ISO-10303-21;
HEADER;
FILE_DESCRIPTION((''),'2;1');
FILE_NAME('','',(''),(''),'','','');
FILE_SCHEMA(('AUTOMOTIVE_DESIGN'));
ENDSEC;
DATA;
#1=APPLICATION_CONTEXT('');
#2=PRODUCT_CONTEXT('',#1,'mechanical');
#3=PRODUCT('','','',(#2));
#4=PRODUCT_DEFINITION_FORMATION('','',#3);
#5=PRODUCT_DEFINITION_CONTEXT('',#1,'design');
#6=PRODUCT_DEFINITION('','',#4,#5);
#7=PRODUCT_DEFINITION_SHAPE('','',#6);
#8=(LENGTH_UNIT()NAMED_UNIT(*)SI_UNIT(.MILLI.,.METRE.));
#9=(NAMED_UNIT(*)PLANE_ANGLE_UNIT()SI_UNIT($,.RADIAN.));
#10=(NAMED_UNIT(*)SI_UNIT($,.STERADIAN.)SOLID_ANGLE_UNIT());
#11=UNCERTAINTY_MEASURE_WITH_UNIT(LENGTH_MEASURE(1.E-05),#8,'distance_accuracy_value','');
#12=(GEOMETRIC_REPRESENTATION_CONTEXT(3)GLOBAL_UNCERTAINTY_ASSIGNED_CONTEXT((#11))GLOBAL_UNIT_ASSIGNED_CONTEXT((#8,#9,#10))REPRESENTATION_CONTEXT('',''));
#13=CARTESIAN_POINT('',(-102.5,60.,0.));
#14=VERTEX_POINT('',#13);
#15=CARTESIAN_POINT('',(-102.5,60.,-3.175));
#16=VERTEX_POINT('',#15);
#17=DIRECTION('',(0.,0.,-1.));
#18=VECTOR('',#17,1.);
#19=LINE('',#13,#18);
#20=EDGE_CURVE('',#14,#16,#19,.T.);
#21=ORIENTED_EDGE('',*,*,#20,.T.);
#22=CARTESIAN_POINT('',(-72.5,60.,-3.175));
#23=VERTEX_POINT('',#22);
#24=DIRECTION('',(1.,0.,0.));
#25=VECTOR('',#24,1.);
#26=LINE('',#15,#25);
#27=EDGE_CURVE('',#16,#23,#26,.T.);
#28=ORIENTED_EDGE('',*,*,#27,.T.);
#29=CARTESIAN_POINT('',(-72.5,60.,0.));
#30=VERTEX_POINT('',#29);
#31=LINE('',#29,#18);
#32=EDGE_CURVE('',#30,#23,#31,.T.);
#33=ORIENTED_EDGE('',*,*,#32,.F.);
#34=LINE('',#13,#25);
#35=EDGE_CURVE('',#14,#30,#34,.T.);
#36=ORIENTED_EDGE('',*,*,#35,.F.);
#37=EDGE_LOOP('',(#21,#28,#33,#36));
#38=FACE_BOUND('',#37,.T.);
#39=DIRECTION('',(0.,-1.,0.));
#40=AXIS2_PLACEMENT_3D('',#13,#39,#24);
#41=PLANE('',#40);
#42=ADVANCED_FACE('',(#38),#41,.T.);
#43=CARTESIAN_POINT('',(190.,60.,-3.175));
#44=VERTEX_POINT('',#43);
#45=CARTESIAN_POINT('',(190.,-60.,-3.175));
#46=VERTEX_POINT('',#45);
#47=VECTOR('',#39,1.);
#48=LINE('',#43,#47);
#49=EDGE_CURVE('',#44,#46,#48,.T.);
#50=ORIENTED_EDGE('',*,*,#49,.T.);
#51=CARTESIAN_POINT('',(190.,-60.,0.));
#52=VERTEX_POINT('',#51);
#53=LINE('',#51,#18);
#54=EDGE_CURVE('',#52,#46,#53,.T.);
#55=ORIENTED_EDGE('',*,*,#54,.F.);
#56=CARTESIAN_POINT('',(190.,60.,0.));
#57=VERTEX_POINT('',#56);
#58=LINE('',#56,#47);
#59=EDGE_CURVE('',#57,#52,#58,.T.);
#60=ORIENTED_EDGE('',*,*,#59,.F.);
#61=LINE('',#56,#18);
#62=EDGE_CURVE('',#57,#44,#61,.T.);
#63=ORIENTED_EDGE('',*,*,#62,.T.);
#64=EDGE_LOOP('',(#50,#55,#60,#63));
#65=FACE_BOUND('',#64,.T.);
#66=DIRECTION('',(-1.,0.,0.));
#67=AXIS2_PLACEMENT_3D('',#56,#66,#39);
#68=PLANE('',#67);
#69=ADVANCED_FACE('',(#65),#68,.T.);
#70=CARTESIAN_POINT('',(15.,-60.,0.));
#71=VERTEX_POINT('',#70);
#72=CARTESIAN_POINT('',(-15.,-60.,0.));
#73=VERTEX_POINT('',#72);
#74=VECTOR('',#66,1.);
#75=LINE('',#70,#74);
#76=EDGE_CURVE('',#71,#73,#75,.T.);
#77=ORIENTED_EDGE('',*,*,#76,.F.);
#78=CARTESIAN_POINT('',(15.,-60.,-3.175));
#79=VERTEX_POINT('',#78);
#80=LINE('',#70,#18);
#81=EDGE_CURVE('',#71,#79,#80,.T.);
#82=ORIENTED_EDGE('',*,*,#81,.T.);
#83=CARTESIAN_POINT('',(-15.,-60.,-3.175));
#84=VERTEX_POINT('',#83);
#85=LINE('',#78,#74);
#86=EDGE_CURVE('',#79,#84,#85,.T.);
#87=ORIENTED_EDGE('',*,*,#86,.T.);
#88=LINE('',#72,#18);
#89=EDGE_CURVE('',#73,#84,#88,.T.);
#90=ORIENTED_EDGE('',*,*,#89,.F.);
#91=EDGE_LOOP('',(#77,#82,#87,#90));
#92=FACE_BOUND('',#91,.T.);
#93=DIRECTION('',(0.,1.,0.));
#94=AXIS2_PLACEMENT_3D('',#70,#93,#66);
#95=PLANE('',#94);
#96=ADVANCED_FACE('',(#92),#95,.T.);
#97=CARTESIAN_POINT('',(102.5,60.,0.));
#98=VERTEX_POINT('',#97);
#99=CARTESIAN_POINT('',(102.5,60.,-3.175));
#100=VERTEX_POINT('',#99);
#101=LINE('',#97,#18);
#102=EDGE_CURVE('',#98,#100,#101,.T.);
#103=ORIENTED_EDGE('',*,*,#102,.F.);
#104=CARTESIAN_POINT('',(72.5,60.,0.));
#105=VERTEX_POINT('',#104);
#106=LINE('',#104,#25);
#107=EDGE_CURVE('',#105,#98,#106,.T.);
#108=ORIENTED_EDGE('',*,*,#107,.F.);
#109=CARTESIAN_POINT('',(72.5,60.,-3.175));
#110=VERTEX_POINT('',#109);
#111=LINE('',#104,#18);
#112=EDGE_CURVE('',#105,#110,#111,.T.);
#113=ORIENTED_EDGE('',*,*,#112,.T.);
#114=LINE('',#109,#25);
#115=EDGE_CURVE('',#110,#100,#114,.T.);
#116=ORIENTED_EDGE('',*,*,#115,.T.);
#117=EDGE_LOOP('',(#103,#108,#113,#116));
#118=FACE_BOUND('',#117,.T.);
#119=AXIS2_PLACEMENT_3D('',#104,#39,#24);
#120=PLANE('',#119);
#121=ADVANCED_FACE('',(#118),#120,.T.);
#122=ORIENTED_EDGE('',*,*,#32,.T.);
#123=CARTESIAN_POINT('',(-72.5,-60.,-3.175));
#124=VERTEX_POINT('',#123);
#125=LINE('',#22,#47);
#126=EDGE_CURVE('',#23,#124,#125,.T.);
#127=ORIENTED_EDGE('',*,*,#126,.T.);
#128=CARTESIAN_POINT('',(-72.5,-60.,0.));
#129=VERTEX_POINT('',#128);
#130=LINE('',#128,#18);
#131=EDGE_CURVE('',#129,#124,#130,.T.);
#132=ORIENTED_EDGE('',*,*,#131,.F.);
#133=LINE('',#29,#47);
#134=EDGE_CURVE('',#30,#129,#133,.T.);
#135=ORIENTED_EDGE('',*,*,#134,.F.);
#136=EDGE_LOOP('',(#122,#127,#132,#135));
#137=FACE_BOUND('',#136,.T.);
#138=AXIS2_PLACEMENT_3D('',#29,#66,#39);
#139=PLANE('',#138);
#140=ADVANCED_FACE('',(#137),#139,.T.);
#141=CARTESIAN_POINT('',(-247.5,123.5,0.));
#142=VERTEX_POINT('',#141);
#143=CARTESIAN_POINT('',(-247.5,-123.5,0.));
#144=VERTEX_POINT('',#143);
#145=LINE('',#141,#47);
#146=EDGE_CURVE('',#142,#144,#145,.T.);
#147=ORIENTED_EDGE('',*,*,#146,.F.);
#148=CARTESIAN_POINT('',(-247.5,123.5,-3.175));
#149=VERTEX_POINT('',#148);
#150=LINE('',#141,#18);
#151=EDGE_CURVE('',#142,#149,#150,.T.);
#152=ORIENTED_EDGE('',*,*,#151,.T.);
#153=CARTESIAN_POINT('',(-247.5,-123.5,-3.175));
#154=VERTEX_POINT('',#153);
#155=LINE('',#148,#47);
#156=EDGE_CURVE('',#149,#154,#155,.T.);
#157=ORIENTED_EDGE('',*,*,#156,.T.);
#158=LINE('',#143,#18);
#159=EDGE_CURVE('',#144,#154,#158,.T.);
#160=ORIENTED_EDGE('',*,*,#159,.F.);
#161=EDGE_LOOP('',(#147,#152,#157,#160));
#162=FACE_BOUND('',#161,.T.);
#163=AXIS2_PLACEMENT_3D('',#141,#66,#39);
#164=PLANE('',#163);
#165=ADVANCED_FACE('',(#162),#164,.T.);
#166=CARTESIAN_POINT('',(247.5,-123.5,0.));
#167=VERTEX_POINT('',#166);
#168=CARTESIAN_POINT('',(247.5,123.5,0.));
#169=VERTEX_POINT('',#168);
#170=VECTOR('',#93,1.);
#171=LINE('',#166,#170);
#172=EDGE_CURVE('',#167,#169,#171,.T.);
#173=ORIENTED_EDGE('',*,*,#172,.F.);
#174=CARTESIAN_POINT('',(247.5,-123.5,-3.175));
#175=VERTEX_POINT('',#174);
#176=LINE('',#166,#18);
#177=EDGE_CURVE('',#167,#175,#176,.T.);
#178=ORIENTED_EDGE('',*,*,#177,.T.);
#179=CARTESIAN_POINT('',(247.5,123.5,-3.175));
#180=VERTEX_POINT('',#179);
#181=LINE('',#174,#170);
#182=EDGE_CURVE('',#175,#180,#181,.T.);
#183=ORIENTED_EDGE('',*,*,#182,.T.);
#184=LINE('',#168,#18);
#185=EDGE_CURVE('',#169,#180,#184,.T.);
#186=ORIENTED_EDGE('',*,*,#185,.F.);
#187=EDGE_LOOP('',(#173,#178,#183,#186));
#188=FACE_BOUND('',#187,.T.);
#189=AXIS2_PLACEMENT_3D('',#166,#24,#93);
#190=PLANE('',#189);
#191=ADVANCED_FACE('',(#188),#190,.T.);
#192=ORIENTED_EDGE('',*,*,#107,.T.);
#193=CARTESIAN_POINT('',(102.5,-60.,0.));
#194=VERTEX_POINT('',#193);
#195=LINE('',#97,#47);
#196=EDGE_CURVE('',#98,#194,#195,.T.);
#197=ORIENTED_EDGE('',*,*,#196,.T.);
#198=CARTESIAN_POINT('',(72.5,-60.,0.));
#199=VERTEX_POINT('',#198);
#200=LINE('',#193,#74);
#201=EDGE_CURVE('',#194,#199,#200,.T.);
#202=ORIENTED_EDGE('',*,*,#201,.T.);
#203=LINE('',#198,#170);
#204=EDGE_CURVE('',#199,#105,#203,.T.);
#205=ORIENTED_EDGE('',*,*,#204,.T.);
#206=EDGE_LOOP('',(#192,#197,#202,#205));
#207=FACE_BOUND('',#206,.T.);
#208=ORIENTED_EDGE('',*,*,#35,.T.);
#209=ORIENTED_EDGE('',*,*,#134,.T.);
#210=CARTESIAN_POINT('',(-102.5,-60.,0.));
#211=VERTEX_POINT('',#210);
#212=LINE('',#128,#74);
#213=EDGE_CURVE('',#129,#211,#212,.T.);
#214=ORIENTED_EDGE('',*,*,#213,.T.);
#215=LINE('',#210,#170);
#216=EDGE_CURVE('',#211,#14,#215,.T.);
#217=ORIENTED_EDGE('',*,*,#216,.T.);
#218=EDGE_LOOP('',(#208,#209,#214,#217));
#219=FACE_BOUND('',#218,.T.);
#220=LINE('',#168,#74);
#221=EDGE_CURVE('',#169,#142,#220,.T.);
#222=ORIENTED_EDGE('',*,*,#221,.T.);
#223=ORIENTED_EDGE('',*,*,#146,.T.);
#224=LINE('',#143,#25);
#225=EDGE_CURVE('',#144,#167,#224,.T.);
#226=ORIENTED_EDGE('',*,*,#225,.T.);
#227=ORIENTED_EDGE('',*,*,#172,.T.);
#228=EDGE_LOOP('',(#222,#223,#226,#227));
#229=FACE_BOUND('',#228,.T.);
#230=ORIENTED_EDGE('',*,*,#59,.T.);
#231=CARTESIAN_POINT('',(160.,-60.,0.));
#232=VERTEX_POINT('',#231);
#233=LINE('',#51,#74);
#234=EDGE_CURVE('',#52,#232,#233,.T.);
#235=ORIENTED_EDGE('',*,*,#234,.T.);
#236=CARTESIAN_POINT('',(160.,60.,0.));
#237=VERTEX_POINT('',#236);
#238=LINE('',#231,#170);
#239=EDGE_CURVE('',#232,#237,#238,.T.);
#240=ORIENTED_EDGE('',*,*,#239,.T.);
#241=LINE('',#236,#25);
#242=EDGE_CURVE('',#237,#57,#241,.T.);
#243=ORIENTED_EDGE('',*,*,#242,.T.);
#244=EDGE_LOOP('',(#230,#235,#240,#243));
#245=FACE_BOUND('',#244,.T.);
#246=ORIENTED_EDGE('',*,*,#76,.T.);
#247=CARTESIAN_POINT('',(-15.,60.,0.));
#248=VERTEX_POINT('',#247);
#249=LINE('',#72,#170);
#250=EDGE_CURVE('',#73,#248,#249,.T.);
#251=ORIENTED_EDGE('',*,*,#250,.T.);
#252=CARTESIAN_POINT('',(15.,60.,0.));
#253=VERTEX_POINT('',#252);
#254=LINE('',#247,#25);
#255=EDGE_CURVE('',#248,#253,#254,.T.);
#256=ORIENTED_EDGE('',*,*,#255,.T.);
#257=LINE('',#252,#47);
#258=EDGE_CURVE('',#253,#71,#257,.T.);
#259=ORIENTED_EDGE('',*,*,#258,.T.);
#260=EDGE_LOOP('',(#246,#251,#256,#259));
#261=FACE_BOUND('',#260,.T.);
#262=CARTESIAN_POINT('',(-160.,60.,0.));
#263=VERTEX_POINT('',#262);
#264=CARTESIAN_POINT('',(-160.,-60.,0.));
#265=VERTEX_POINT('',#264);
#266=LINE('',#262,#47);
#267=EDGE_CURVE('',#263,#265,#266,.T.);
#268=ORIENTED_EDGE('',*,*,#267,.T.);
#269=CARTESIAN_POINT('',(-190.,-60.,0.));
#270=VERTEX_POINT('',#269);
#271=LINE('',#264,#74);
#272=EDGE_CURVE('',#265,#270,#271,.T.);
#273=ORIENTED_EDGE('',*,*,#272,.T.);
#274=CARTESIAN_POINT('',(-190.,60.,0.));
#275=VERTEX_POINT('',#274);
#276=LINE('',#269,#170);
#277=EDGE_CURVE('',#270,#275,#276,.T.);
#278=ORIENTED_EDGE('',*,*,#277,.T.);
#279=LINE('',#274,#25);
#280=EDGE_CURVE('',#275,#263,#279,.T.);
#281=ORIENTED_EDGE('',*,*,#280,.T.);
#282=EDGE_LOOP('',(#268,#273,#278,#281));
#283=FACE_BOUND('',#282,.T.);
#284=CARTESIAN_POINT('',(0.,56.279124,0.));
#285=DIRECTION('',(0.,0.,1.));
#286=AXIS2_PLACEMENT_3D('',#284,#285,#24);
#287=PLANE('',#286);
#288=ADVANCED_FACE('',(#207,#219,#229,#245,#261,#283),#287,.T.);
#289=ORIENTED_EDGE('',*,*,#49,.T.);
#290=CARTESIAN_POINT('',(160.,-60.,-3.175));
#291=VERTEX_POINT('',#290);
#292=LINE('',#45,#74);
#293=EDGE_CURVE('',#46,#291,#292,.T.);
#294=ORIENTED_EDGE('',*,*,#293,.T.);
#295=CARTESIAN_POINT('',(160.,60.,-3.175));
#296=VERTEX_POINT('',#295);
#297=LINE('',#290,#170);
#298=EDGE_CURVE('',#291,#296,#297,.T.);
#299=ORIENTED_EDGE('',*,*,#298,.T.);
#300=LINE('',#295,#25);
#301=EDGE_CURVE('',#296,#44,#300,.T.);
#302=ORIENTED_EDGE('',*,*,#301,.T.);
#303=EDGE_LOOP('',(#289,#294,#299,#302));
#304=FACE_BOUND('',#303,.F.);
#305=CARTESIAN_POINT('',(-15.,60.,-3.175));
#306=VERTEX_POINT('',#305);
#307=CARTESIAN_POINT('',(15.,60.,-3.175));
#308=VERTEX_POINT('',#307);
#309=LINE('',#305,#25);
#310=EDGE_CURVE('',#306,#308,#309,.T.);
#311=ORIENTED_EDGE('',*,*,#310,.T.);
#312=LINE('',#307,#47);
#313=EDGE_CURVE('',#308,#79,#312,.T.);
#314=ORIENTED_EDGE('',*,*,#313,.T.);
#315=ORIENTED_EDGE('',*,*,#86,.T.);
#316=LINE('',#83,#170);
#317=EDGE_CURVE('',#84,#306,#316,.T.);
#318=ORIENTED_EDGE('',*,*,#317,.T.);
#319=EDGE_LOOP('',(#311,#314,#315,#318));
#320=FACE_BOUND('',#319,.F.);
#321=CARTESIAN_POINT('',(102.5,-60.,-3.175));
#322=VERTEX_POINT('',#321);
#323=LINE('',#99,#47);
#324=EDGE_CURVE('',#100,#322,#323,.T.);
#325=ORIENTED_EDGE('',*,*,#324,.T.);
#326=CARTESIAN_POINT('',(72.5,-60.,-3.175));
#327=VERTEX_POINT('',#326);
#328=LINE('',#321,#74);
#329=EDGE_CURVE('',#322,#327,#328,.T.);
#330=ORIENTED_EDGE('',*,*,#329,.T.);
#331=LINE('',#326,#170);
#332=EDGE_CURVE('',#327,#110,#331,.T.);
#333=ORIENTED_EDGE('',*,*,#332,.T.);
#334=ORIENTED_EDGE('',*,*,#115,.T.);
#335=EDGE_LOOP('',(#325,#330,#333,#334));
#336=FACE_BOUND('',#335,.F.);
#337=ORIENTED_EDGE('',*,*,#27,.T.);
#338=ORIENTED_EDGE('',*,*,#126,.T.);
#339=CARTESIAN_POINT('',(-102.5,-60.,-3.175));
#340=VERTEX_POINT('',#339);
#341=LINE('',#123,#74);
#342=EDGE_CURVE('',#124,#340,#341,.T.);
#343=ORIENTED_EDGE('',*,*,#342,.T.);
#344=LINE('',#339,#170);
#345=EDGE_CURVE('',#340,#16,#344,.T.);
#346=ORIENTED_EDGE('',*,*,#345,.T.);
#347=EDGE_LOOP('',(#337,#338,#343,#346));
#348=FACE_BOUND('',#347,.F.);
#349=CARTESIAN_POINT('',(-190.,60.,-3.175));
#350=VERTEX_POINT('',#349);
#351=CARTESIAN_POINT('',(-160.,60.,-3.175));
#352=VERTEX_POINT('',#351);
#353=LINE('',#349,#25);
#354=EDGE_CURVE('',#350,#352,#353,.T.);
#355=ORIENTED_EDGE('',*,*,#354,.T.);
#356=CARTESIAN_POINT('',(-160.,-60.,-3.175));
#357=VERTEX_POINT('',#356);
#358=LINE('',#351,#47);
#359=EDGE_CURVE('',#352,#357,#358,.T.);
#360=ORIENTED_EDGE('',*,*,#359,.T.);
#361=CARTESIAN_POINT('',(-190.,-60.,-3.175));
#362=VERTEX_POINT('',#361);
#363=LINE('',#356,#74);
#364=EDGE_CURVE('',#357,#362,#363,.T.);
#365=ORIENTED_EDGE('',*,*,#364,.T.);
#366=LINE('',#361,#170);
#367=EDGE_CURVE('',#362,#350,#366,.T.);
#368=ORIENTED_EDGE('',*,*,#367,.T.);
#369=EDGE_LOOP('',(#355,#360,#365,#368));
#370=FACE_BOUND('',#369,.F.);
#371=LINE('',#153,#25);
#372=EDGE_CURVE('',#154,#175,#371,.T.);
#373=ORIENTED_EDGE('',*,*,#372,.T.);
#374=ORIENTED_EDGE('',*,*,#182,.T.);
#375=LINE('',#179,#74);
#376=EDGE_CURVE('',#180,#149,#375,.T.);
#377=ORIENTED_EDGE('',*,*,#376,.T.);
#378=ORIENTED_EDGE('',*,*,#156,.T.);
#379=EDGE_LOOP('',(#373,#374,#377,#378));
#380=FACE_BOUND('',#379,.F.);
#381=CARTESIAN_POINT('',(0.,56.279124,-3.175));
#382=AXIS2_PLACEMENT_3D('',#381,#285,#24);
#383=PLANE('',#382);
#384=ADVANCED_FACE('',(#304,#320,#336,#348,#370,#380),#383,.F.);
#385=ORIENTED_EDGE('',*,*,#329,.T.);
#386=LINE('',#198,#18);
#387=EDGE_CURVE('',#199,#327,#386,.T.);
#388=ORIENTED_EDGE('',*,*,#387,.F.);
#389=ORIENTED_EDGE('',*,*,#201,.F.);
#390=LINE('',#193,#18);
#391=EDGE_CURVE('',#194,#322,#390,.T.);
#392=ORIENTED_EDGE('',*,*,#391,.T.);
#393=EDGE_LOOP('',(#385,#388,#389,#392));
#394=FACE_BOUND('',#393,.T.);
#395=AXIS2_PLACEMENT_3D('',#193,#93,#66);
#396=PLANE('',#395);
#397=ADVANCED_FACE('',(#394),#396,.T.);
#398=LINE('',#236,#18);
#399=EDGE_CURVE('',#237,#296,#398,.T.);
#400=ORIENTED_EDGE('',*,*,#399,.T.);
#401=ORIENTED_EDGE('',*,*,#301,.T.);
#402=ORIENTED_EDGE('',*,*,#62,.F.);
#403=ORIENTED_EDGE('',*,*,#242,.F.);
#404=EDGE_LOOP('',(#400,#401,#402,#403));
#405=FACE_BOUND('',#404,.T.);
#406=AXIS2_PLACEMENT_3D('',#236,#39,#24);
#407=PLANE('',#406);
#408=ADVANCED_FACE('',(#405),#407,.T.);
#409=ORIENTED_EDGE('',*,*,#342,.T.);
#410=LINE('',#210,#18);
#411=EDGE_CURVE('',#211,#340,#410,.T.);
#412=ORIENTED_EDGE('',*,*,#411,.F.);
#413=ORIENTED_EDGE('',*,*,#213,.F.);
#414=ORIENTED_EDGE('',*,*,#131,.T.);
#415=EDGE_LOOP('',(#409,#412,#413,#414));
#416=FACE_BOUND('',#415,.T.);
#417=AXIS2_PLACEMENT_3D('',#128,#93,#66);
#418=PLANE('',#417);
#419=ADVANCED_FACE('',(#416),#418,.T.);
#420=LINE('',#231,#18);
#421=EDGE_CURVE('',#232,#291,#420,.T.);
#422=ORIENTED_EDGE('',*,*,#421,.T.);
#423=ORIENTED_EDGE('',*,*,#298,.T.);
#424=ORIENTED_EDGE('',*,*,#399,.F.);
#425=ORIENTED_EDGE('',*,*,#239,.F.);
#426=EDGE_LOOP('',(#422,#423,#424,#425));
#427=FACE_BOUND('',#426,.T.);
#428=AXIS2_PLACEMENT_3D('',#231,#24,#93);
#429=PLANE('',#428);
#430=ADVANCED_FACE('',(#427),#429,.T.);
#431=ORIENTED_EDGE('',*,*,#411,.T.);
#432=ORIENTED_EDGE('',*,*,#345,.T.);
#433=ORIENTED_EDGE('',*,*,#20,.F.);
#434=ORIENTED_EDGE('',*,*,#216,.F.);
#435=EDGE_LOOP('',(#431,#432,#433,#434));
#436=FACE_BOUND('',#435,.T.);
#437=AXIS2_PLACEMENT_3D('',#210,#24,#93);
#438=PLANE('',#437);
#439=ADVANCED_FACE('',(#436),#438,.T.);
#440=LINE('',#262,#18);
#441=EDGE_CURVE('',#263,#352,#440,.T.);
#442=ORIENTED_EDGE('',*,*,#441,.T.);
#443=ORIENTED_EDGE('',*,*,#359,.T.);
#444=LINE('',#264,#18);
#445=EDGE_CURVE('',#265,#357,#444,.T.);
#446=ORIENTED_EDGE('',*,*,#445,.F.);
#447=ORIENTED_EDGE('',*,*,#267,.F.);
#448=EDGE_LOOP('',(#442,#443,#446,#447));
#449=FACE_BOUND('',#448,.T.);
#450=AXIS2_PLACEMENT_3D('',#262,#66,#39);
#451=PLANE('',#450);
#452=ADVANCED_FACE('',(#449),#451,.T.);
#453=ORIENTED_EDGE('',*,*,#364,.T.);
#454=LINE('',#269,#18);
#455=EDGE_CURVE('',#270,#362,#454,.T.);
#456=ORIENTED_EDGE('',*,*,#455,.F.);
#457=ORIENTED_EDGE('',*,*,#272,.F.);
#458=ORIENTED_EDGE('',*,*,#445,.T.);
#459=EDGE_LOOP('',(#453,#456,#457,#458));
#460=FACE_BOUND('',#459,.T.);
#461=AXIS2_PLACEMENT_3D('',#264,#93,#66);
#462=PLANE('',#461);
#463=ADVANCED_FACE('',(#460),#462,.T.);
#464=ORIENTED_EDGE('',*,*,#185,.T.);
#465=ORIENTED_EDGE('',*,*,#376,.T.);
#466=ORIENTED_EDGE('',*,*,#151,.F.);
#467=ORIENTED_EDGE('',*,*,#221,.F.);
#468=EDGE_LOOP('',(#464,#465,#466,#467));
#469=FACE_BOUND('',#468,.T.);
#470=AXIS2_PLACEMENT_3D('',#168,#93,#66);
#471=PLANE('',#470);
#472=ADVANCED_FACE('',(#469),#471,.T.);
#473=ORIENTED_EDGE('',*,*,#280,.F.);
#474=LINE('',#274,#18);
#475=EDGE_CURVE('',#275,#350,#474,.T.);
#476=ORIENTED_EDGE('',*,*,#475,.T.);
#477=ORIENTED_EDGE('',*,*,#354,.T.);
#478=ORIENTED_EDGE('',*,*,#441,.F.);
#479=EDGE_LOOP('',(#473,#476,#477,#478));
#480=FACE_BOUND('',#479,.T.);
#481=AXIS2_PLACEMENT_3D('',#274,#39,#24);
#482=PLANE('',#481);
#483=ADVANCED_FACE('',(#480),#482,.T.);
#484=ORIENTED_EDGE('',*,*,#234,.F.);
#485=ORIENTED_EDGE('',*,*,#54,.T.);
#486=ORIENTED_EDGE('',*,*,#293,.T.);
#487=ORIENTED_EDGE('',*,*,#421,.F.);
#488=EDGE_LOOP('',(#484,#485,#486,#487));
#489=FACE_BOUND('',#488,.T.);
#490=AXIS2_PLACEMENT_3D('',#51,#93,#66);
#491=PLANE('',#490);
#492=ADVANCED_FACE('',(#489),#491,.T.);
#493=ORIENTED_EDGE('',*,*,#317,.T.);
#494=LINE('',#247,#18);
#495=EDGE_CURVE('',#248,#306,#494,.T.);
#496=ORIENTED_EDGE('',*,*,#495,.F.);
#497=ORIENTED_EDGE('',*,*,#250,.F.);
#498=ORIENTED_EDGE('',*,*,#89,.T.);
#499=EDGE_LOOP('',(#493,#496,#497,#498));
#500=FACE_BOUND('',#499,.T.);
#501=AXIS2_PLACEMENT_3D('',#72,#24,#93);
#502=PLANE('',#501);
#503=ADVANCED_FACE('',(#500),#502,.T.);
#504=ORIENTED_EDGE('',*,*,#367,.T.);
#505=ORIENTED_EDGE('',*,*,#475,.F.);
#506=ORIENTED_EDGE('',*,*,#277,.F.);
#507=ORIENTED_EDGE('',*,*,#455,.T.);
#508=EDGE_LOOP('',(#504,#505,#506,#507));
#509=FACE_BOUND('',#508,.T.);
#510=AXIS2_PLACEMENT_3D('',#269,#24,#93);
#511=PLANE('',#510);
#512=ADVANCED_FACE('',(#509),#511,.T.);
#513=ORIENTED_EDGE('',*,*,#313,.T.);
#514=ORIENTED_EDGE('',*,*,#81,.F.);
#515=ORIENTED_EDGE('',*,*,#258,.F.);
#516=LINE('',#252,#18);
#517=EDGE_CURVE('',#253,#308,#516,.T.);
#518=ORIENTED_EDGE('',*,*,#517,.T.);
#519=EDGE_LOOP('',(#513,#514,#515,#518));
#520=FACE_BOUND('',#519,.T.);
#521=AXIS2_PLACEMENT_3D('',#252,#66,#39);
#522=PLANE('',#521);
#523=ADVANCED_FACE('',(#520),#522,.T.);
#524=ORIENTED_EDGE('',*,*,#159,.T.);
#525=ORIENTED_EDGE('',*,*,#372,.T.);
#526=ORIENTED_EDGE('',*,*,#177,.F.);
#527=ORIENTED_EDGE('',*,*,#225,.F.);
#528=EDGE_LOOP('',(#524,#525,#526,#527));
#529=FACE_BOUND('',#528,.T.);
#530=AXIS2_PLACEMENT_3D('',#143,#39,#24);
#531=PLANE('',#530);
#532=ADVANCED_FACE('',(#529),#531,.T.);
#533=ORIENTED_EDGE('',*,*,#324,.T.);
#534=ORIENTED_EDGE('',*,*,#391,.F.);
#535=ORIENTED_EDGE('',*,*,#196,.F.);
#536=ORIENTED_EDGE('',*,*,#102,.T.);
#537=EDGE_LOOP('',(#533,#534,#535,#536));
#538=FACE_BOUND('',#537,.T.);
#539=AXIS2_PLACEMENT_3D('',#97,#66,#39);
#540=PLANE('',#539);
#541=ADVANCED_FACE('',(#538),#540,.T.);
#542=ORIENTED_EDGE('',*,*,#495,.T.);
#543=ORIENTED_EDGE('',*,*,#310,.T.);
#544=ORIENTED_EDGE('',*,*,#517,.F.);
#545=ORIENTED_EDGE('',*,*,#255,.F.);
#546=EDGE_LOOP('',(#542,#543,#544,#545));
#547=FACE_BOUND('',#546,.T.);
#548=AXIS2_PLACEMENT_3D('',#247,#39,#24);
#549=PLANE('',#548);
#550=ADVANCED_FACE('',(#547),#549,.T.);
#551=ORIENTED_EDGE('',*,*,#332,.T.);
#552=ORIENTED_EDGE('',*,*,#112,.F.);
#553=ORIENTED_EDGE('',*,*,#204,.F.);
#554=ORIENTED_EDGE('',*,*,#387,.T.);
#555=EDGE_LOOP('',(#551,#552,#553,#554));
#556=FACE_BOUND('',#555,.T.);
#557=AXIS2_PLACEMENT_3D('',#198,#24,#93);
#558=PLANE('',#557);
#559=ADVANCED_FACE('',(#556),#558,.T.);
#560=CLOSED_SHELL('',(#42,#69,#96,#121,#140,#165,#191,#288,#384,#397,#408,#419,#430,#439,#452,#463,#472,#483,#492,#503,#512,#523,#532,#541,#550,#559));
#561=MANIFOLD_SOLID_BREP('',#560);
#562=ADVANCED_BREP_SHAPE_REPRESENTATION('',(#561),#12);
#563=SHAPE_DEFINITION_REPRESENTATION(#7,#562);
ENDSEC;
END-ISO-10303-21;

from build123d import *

# Parameters (mm, degrees)
F1_DEPTH = 3.175


# Not quite as in the source:
# - a length typed as a fraction of an inch, garbled in the dataset ("3 / 203.2 mm" for 3/8 in), is restored


with BuildPart() as f1:
    # F0 (on Top) → F1 (new body)
    with BuildSketch(Plane.XY):
        Polygon((247.5, 123.5), (-247.5, 123.5), (-247.5, 0), (-190, 0), (-190, 60), (-160, 60), (-160, 0), (-102.5, 0), (-102.5, 60), (-72.5, 60), (-72.5, 0), (-15, 0), (-15, 60), (15, 60), (15, 0), (72.5, 0), (72.5, 60), (102.5, 60), (102.5, 0), (160, 0), (160, 60), (190, 60), (190, 0), (247.5, 0), align=None)
        Polygon((-190, 0), (-247.5, 0), (-247.5, -123.5), (247.5, -123.5), (247.5, 0), (190, 0), (190, -60), (160, -60), (160, 0), (102.5, 0), (102.5, -60), (72.5, -60), (72.5, 0), (15, 0), (15, -60), (-15, -60), (-15, 0), (-72.5, 0), (-72.5, -60), (-102.5, -60), (-102.5, 0), (-160, 0), (-160, -60), (-190, -60), align=None)
    extrude(amount=-F1_DEPTH)


solid = f1.part
